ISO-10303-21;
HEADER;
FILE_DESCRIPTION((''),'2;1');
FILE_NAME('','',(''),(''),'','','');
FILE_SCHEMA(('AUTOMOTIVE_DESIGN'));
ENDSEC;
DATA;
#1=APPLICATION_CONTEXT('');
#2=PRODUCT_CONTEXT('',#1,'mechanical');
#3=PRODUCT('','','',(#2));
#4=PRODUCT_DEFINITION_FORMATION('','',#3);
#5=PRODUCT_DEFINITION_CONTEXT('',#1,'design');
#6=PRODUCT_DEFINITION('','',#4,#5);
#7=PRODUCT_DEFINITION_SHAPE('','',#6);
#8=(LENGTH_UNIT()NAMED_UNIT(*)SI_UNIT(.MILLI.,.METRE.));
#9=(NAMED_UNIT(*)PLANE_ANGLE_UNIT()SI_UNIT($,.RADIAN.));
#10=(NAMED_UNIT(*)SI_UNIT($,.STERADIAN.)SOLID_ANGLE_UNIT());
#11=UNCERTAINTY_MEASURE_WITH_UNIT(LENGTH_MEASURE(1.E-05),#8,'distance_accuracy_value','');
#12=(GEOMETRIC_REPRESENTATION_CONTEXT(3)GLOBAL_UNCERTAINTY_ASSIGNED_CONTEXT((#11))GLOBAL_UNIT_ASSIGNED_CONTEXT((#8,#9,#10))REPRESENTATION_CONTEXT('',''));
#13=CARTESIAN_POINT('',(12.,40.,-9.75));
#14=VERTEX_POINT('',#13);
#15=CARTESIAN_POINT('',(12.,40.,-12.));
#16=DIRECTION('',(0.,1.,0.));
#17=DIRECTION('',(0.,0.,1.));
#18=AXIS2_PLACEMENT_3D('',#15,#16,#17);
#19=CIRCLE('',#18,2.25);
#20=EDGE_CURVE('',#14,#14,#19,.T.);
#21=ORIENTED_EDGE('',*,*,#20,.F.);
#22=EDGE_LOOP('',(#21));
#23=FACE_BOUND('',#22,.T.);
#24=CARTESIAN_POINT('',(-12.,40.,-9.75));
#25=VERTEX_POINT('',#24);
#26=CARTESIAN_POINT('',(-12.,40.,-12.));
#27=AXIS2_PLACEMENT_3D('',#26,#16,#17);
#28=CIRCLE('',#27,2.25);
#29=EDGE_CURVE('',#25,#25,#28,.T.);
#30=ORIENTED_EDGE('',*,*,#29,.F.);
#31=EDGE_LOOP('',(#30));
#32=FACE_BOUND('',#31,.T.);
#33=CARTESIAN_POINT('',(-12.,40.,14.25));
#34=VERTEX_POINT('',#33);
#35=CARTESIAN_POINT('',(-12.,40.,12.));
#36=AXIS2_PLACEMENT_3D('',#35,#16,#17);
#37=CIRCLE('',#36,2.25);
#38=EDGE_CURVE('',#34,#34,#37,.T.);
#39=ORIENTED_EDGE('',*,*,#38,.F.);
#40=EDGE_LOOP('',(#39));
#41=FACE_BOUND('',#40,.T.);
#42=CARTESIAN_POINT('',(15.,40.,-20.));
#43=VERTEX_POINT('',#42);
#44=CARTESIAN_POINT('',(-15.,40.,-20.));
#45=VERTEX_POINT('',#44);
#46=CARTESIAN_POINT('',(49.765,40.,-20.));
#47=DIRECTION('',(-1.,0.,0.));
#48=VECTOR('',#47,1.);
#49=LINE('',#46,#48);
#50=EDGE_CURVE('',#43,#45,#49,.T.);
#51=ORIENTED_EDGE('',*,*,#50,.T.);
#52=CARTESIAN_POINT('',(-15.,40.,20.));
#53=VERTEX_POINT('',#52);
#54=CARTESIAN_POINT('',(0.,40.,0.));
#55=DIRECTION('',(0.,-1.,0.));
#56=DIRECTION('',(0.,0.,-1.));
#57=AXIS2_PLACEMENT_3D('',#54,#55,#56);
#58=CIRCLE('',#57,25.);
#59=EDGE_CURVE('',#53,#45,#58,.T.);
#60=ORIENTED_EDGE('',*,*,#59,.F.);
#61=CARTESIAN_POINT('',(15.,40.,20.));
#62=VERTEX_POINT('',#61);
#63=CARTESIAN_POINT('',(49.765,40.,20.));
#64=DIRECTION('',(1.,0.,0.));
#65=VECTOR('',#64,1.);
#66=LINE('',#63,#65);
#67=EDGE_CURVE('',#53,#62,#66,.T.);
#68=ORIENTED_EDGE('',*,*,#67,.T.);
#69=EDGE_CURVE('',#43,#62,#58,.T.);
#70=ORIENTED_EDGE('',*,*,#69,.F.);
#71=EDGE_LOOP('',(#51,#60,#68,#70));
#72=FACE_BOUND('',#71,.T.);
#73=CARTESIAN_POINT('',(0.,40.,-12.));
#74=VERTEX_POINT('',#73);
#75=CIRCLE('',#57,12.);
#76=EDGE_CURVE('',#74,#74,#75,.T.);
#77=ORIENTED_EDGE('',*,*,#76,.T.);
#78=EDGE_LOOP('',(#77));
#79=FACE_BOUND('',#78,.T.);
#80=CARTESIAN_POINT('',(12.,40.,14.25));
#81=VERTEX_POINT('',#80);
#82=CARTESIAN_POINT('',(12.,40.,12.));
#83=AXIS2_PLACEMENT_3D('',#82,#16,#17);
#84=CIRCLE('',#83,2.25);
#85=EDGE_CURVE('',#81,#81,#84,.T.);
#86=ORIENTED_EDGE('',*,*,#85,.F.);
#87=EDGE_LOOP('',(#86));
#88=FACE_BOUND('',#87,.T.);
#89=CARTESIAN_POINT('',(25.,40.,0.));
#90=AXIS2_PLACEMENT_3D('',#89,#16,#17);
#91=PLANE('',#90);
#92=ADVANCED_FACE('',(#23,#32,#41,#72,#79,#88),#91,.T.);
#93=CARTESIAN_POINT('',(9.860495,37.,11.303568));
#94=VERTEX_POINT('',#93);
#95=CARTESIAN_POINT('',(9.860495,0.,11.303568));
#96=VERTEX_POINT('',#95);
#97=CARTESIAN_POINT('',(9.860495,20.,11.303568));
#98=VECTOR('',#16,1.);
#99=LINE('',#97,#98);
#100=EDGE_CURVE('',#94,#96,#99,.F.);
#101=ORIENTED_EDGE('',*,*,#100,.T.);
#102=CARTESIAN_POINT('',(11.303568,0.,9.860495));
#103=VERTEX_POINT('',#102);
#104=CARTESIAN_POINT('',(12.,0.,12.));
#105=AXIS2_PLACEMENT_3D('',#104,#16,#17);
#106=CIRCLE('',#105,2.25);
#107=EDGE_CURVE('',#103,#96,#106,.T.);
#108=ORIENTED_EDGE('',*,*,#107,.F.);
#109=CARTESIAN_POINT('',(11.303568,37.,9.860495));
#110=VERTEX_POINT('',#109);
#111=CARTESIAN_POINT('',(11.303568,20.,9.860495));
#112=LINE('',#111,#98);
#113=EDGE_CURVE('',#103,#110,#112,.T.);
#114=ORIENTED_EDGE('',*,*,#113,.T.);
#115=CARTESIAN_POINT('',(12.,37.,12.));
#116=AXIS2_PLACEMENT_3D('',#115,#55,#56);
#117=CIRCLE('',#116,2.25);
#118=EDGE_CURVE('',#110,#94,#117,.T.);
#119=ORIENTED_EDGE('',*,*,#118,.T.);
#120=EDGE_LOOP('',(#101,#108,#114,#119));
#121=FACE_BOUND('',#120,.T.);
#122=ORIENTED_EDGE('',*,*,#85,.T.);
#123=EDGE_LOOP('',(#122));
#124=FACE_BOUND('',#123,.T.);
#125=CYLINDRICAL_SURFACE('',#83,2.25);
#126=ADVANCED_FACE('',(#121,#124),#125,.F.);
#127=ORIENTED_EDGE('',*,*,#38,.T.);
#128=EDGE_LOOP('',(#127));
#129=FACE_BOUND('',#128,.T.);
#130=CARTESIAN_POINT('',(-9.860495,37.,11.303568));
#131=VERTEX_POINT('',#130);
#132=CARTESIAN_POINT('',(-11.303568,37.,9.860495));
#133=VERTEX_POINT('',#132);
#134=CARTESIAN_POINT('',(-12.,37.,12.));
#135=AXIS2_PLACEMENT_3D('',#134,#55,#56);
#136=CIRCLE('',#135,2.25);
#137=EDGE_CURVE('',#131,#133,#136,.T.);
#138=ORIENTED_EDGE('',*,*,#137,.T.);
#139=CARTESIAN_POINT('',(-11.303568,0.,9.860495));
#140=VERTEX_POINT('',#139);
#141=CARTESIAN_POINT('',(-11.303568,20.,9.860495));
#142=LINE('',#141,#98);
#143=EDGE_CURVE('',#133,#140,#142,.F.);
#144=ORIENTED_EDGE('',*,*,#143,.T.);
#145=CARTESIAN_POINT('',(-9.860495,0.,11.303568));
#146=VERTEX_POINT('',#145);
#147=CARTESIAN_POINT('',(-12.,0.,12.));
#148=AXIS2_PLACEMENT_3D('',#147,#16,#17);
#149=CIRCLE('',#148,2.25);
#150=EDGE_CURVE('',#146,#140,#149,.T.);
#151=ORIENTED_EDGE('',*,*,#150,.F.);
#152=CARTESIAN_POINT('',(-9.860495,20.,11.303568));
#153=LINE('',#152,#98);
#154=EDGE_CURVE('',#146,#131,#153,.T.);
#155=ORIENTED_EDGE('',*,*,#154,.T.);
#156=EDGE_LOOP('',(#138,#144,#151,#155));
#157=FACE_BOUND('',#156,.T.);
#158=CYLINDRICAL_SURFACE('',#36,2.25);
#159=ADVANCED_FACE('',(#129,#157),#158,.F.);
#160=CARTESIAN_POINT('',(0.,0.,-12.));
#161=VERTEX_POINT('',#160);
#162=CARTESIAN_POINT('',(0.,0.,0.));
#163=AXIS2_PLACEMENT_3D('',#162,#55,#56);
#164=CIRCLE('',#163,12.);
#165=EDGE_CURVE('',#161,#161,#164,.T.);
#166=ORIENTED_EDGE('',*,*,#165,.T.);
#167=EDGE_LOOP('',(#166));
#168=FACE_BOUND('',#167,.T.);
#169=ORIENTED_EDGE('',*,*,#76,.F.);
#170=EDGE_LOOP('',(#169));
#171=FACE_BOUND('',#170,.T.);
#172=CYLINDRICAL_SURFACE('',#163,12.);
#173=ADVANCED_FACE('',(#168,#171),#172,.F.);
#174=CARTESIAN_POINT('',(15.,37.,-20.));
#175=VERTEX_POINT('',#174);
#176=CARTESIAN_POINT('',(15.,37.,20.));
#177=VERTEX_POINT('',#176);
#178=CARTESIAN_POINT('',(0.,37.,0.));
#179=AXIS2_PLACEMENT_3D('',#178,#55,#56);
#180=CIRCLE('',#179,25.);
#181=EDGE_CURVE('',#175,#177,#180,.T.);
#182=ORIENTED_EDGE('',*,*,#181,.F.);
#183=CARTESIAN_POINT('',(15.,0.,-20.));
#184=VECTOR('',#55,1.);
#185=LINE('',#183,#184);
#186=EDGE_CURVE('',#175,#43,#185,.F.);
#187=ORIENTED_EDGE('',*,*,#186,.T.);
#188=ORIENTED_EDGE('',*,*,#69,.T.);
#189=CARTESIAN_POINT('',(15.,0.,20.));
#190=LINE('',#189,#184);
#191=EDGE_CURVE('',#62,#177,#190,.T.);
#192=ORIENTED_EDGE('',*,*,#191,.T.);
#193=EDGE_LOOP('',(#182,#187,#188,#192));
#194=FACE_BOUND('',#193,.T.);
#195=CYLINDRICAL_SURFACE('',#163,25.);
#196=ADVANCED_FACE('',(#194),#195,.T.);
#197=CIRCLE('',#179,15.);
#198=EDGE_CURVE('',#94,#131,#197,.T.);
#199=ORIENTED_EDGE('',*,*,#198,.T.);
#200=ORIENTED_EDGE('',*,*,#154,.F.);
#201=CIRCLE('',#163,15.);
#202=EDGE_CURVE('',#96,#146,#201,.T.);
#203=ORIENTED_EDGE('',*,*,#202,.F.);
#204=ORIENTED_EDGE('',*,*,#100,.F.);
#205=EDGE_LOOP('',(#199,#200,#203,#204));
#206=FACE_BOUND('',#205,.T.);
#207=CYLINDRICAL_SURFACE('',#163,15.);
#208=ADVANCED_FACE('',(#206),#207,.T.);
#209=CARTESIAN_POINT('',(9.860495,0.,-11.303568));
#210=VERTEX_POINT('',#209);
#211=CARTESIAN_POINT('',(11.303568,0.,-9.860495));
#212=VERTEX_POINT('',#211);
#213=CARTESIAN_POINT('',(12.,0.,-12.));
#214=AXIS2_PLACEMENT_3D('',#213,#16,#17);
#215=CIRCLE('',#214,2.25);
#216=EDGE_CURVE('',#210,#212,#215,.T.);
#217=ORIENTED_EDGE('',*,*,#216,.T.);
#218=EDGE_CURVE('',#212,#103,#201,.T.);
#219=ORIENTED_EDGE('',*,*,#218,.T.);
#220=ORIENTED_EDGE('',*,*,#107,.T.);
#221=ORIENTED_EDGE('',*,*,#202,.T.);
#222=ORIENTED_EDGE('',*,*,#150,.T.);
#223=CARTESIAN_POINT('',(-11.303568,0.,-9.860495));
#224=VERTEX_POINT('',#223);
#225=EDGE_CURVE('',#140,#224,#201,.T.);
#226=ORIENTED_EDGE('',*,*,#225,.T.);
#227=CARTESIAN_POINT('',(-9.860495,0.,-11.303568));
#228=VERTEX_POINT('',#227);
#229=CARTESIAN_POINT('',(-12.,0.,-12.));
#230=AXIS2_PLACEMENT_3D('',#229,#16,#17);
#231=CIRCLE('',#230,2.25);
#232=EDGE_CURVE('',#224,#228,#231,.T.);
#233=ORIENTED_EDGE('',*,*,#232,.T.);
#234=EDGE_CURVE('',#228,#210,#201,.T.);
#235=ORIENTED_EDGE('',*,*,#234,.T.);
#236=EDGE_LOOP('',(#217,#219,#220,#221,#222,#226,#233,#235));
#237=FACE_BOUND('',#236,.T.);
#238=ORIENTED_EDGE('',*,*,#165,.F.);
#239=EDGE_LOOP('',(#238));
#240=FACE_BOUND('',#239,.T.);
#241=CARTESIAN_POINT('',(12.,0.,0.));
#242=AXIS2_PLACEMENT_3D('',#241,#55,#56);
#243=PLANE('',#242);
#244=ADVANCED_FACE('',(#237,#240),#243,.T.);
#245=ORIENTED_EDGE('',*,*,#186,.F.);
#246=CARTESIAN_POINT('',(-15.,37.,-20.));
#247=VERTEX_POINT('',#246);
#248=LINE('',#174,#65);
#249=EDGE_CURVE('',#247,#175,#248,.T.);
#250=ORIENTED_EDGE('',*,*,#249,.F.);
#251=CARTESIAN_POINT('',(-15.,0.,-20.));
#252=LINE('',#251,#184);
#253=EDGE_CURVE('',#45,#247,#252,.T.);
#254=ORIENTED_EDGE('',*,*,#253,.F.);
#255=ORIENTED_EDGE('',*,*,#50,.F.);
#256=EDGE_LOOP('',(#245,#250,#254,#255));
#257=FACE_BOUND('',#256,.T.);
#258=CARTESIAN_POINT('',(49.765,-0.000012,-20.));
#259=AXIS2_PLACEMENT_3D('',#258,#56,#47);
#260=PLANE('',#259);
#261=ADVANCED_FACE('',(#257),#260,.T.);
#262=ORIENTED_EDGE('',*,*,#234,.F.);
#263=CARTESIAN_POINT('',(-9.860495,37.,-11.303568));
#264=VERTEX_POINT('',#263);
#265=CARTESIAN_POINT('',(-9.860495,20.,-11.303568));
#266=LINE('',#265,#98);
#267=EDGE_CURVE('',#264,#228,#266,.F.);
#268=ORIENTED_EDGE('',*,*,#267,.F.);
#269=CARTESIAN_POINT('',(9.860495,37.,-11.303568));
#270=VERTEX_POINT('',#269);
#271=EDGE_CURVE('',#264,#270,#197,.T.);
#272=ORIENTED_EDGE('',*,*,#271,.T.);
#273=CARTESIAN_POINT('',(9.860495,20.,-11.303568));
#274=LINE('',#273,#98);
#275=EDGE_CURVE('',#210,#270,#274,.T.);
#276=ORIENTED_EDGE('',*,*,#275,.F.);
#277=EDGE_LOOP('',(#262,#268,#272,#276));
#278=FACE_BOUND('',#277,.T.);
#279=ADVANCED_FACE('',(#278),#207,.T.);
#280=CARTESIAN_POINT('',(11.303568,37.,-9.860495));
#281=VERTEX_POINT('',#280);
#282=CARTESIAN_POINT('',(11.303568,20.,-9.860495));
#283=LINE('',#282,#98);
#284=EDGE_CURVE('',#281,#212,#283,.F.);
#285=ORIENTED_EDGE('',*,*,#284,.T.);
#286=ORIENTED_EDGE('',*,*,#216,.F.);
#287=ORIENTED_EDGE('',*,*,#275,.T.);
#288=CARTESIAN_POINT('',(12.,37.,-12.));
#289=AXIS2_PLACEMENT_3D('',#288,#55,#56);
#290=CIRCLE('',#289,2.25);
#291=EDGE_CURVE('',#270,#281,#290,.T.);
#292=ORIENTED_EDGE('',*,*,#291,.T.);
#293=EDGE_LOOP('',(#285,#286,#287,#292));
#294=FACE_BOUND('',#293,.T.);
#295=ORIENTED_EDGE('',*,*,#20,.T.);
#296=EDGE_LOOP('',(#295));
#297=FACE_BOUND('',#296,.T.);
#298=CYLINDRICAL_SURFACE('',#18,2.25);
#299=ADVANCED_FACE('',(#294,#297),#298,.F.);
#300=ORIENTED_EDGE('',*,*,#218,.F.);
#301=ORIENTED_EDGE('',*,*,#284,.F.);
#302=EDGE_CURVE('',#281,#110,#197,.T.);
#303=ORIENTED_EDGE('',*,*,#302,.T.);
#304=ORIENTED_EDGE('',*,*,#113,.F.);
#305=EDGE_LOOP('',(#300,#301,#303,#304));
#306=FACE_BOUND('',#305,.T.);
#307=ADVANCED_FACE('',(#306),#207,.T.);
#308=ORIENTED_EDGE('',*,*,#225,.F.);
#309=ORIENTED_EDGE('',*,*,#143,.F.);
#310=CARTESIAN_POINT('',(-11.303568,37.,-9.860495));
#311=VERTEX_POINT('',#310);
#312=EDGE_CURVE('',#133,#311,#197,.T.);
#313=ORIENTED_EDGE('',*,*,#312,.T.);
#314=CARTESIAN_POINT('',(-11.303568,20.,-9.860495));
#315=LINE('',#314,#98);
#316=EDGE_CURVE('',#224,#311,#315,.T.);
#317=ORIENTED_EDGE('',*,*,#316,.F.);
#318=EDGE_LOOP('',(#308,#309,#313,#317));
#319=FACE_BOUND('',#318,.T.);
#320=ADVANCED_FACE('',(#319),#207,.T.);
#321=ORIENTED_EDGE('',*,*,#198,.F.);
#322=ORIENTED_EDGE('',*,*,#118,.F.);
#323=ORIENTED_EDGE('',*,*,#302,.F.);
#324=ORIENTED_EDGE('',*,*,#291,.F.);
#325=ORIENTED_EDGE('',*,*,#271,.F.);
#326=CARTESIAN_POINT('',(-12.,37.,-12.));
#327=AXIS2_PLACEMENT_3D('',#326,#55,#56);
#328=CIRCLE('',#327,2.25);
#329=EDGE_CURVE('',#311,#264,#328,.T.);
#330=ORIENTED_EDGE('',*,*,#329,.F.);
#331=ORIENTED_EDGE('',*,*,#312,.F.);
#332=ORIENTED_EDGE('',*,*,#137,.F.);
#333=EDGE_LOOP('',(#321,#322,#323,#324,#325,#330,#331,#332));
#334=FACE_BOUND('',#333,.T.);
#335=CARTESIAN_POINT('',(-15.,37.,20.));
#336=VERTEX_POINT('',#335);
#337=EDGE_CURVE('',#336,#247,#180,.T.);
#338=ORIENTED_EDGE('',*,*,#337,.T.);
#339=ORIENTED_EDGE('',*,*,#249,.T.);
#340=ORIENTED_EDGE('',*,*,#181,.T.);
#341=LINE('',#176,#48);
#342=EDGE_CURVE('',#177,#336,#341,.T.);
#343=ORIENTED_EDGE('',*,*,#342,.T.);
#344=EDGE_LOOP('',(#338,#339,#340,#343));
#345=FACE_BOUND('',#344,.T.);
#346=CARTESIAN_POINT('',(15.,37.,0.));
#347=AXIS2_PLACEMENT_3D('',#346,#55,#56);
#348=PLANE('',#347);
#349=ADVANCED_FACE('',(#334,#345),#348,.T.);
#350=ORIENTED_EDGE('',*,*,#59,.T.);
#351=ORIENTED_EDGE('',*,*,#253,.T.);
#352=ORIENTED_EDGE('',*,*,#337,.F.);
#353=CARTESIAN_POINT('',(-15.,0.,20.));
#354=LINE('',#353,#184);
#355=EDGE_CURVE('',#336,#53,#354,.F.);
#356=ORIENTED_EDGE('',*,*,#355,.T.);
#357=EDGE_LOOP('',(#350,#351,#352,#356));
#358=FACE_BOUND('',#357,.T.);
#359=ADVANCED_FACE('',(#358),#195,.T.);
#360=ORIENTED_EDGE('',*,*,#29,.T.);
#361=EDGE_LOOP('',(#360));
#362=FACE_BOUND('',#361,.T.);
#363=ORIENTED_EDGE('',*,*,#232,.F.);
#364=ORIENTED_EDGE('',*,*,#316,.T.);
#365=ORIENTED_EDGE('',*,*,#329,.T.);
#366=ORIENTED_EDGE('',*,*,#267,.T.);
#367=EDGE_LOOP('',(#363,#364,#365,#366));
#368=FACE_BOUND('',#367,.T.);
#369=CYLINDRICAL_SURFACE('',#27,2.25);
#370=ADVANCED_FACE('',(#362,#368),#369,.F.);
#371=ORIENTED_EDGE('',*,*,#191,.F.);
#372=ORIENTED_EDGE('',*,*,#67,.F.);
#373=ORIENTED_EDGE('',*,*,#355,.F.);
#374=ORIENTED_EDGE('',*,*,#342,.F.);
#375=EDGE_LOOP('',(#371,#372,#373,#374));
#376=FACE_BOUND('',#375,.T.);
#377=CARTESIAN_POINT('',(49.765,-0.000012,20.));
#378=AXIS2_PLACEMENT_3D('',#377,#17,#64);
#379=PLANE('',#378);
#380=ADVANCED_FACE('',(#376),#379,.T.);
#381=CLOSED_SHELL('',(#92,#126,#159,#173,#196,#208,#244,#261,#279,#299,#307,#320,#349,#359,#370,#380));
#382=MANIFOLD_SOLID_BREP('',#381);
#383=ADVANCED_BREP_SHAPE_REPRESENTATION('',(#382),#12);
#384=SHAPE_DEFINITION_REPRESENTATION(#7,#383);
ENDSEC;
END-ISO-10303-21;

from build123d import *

# Parameters (mm, degrees)
CUT_EXTRUDE3_START   = 37
CUT_EXTRUDE3_DEPTH   = 3
M4_CLEARANCE_HOLE1_D = 4.5


# Read off the part's stored shape, not the designer's step: Cut-Extrude3
with BuildPart() as part:
    # Sketch1 → Revolve1 (revolve)
    with BuildSketch(Plane.XY, mode=Mode.PRIVATE) as revolve1_sk:
        Polygon((12, 40), (12, 0), (15, 0), (15, 37), (25, 37), (25, 40), align=None)
    revolve(revolve1_sk.sketch.rotate(Axis((0, 0, 0), (0, 1, 0)), 90), axis=Axis((0, 0, 0), (0, 1, 0)))

    # Cut-Extrude3 outline → Cut-Extrude3 (cut)
    with BuildSketch(Plane(origin=(0, 0, 0), x_dir=(1, 0, 0), z_dir=(0, 1, 0)).offset(CUT_EXTRUDE3_START)):
        with BuildLine():
            Line((15, -20), (-15, -20))
            ThreePointArc((-15, -20), (0, -25), (15, -20))
        make_face()
        with BuildLine():
            ThreePointArc((15, 20), (0, 25), (-15, 20))
            Line((-15, 20), (15, 20))
        make_face()
    extrude(amount=CUT_EXTRUDE3_DEPTH, mode=Mode.SUBTRACT)

    # M4 Clearance Hole1 (through all)
    with Locations(Plane(origin=(0, 40, 0), x_dir=(1, 0, 0), z_dir=(0, 1, 0))):
        with Locations((-12, 12), (12, 12), (12, -12), (-12, -12), (0, 0)):
            Hole(M4_CLEARANCE_HOLE1_D / 2)


solid = part.part
